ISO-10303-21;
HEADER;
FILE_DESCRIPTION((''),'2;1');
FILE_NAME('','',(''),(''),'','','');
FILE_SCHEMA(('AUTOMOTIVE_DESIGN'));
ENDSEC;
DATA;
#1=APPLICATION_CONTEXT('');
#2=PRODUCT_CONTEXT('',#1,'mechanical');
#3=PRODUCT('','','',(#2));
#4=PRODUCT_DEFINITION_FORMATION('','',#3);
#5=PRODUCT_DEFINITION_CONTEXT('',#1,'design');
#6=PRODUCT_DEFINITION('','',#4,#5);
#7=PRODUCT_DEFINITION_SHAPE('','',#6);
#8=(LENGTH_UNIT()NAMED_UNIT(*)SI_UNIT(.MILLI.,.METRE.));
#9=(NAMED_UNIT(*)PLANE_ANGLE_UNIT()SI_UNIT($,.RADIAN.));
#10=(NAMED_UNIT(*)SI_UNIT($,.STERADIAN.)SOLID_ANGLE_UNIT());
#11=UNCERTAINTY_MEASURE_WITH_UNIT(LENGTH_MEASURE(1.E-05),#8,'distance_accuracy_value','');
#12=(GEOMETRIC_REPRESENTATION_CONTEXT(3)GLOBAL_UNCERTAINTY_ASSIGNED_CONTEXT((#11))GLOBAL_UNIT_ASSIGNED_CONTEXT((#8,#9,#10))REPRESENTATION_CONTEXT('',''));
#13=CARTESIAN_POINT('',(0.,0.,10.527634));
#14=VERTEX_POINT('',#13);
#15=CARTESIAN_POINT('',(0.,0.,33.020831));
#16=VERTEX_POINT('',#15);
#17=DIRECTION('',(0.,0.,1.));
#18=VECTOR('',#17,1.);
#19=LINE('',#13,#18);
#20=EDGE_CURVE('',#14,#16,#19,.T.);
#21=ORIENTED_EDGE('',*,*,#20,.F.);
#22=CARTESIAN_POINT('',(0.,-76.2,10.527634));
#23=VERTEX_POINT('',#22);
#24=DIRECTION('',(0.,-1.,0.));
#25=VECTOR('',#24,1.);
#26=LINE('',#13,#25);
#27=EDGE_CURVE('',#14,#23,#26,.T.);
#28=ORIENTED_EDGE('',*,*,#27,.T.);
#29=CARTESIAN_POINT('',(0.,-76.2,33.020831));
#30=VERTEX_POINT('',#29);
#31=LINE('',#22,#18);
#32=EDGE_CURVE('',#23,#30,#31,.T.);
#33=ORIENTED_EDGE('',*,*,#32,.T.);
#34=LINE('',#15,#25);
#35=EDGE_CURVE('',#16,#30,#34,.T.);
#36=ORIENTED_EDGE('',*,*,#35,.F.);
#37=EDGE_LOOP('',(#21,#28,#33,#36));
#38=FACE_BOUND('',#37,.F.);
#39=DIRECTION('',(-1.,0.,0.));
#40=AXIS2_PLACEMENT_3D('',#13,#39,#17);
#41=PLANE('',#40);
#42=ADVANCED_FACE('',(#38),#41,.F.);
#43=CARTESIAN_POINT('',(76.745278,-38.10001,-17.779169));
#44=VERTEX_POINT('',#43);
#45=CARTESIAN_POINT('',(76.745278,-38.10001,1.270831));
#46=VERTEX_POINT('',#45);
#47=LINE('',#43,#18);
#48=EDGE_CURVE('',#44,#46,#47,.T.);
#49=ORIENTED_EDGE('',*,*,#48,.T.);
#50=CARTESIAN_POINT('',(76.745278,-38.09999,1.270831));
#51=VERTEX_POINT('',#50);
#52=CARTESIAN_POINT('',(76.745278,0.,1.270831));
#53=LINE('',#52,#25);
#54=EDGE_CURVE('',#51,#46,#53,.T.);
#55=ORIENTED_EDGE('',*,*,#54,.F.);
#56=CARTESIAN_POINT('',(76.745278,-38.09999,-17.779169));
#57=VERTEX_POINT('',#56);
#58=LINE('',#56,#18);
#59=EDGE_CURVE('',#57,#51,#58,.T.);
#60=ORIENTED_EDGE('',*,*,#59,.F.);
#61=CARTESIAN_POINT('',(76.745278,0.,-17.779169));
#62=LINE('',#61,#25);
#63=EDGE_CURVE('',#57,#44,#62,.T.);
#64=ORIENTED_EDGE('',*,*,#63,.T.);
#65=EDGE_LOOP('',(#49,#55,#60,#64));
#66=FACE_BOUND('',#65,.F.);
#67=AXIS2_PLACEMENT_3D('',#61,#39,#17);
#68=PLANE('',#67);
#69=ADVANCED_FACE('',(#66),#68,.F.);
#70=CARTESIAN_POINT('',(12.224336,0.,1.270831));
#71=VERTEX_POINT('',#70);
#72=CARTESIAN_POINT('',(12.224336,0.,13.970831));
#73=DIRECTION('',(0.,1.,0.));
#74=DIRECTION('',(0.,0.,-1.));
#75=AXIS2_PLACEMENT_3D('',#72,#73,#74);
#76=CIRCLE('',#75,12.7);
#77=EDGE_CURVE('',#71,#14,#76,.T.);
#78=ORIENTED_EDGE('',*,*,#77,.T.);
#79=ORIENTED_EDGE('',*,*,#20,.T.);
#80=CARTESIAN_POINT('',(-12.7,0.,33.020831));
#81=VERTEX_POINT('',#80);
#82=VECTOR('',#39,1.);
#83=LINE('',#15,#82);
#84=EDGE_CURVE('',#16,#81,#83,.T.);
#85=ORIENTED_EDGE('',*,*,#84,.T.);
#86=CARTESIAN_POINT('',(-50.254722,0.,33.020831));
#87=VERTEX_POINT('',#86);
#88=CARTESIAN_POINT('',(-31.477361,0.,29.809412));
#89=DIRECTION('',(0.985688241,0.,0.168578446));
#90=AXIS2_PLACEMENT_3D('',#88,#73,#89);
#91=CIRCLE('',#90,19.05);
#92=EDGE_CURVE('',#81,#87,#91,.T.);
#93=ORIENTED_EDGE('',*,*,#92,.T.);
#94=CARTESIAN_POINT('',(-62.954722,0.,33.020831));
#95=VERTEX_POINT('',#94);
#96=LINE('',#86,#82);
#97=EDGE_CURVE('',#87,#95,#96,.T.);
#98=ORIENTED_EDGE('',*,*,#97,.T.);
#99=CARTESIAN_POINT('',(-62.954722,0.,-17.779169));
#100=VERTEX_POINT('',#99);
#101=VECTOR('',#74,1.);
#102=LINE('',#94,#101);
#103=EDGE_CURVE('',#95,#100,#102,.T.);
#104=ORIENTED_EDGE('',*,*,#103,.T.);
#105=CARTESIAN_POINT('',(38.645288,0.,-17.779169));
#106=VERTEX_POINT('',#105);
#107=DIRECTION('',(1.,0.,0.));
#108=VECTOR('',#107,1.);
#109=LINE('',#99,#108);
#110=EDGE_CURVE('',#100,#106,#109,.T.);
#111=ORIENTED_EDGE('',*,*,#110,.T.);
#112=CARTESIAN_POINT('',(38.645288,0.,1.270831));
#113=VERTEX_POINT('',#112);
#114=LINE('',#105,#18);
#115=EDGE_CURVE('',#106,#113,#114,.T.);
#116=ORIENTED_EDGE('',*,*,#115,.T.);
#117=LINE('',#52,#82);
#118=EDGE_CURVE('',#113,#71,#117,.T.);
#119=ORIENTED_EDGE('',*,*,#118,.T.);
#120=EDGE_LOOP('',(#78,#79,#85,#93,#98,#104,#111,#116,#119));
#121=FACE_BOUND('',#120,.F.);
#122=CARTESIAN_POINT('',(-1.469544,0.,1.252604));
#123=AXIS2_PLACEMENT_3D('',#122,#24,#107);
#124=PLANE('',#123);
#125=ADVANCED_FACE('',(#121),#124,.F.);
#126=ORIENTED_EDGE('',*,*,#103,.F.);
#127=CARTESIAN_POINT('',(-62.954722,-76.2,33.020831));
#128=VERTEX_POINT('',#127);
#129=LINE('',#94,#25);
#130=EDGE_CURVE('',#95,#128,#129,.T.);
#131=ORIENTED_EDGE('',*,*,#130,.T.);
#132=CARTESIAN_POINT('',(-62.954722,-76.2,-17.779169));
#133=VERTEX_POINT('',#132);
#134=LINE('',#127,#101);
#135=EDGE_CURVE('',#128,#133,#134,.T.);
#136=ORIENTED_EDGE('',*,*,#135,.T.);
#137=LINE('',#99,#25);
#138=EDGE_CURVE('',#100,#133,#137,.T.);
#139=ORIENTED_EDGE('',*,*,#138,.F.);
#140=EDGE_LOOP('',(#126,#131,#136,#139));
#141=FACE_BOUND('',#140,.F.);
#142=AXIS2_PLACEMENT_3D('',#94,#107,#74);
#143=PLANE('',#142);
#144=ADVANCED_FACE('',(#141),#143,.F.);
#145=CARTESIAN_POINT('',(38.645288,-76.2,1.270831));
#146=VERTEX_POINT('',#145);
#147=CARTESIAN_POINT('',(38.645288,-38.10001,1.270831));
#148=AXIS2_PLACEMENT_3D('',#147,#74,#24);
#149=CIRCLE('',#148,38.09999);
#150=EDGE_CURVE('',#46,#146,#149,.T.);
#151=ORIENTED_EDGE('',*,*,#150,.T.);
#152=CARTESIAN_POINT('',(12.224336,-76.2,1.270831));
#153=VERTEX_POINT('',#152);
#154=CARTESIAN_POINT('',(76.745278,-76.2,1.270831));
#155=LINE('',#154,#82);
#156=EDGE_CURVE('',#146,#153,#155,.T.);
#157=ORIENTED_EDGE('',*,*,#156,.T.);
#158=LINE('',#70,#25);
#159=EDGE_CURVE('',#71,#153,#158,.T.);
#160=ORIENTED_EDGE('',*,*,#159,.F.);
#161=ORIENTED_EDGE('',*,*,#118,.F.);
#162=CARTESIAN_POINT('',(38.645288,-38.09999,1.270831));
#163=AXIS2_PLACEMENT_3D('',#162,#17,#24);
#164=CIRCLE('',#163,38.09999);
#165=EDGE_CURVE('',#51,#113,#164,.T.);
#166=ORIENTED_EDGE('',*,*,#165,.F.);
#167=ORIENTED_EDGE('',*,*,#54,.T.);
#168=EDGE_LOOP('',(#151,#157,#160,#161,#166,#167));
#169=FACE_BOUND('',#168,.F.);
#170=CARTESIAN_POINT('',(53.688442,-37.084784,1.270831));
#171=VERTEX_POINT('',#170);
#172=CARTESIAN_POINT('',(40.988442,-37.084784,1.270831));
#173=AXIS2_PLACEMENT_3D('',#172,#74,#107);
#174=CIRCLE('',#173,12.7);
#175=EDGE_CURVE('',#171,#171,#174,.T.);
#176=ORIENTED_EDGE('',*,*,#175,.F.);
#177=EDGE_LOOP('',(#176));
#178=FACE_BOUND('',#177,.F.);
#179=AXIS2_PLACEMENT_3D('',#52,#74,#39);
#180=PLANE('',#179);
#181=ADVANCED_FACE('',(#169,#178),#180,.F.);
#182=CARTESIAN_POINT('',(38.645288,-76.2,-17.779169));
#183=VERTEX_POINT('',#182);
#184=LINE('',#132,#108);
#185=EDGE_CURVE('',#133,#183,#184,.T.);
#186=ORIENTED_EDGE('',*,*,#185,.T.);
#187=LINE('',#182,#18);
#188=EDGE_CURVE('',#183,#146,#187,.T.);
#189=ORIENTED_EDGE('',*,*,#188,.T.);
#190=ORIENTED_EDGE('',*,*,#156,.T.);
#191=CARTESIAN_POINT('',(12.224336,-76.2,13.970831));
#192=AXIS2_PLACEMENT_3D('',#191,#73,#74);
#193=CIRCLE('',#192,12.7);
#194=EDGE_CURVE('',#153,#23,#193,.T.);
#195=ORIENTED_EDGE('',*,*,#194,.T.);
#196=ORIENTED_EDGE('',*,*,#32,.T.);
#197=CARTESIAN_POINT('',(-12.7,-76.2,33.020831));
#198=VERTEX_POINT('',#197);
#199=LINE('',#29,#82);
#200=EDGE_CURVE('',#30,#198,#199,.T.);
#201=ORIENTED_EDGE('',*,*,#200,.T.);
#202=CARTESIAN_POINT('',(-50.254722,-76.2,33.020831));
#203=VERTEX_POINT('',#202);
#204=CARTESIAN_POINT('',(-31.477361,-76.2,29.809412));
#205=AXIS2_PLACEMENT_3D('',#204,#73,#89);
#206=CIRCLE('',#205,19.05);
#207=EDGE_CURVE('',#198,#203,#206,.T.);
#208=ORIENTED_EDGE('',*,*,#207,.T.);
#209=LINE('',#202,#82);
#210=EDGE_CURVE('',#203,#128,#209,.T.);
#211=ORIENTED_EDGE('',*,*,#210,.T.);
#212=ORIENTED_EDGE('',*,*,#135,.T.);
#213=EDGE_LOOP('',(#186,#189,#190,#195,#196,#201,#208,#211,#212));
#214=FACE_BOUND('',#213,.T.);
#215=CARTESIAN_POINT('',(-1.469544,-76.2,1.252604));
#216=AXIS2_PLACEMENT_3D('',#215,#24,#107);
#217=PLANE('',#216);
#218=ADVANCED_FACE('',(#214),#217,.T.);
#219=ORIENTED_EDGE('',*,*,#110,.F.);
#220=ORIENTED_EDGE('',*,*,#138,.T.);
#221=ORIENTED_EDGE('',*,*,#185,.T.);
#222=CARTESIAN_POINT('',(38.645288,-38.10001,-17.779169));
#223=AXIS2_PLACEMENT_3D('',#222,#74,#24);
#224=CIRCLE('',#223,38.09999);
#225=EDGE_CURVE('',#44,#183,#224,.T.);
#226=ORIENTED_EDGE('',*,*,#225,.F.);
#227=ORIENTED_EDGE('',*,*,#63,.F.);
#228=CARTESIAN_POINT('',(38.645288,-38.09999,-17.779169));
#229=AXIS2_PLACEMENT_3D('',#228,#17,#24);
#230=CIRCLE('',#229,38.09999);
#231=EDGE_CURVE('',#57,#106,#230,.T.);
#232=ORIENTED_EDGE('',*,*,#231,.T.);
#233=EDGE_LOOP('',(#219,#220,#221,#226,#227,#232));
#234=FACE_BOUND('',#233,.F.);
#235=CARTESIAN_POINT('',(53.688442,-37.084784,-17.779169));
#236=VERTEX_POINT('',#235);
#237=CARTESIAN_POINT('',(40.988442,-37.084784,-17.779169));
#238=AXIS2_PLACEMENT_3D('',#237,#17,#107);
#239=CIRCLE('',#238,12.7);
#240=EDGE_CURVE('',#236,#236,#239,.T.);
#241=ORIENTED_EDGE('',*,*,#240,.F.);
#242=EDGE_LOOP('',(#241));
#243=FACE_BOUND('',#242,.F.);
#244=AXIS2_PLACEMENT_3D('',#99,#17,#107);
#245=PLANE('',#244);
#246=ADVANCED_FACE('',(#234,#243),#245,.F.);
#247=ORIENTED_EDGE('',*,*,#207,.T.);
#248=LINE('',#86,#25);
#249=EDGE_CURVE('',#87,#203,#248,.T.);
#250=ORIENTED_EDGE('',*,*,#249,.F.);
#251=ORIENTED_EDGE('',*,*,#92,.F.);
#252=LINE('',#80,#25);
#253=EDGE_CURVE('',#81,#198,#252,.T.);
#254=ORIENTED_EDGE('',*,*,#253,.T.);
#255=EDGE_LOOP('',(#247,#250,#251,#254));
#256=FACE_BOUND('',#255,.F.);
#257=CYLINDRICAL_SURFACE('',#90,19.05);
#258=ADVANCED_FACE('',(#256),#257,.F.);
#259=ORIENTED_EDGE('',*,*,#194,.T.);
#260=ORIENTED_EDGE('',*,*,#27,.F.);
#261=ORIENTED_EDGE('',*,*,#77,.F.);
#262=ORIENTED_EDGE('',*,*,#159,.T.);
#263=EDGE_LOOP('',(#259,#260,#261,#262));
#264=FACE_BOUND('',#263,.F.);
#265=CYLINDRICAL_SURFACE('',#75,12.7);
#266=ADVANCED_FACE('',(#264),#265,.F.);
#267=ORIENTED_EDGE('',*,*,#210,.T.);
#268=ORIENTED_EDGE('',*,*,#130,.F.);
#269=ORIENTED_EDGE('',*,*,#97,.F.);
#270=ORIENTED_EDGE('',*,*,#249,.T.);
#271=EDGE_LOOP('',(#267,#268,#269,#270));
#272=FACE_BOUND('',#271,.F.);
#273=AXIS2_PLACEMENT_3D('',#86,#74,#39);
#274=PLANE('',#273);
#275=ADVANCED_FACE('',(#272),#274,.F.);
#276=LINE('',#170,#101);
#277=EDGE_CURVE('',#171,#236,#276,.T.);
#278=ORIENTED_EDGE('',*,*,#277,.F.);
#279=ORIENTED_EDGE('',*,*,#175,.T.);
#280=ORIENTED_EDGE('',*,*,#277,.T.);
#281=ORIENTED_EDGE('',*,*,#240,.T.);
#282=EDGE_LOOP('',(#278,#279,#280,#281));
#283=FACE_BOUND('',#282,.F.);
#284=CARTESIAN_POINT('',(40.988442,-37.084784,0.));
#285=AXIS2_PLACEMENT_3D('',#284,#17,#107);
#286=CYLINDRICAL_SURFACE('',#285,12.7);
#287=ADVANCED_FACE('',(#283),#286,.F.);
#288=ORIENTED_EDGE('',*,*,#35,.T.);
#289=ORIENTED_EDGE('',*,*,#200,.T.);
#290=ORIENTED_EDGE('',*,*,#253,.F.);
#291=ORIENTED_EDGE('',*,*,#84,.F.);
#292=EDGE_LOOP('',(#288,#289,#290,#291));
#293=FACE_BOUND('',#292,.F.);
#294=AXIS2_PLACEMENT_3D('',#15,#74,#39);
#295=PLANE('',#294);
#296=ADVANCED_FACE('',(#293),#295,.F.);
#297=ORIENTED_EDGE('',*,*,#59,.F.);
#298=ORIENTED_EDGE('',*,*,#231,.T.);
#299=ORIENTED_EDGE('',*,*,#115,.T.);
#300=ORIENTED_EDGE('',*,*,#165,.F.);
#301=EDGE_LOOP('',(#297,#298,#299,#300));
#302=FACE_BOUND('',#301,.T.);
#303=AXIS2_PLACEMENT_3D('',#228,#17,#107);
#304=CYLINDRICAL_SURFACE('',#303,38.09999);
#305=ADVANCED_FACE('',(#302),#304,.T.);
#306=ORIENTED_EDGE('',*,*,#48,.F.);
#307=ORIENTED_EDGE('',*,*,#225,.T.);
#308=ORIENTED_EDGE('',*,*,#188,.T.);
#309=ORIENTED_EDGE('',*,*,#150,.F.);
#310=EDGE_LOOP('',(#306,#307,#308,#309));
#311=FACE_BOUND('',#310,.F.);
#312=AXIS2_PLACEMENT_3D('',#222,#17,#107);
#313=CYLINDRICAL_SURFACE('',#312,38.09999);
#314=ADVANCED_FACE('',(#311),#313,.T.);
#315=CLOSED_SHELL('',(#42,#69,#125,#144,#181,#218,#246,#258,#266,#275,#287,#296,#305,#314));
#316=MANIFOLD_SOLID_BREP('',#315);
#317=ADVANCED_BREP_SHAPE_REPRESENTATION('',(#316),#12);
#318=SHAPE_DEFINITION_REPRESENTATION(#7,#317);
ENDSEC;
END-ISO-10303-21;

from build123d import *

# Parameters (mm, degrees)
F1_DEPTH = 76.2
F2_R     = 38.09999
F3_R     = 12.7
F4_DEPTH = 50.8
F5_DEPTH = 25.4


# Not quite as in the source:
# - a fillet or chamfer is up to 0.001 mm smaller than in the source, because OpenCascade refuses the exact size


with BuildPart() as f1:
    # F0 (on Front) → F1 (new body)
    with BuildSketch(Plane.XZ):
        with BuildLine():
            Line((-50.2547219646, 33.020831282), (-62.9547219646, 33.020831282))
            Line((-62.9547219646, 33.020831282), (-62.9547219646, -17.779168718))
            Line((-62.9547219646, -17.779168718), (76.7452780354, -17.779168718))
            Line((76.7452780354, -17.779168718), (76.7452780354, 1.270831282))
            Line((76.7452780354, 1.270831282), (12.2243361415, 1.270831282))
            ThreePointArc((12.2243361415, 1.270831282), (4.5574789786, 3.8461435711), (0, 10.5276342357))
            Line((0, 10.5276342357), (0, 33.020831282))
            Line((0, 33.020831282), (-12.7, 33.020831282))
            ThreePointArc((-12.7, 33.020831282), (-31.4773609823, 10.7594118855), (-50.2547219646, 33.020831282))
        make_face()
    extrude(amount=F1_DEPTH)

    # F2 (radius 38.1 in the source; OpenCascade refuses exactly that, so slightly less here)
    f2_edges = [f1.edges().sort_by_distance(p)[0] for p in [
        (76.745278, -76.2, -8.254169),
        (76.745278, 0, -8.254169),
    ]]
    fillet(f2_edges, radius=F2_R)

    # F3 (on Top) → F4 (cut)
    with BuildSketch(Plane.XY):
        with Locations((40.9884415567, -37.0847843587)):
            Circle(F3_R)
    extrude(amount=F4_DEPTH, mode=Mode.SUBTRACT)

    # F5 (cut): a face of the model
    f5_faces = [f1.faces().sort_by_distance(p)[0] for p in [
        (40.9884415567, -37.0847843587, 0),
    ]]
    extrude(f5_faces, amount=-F5_DEPTH, mode=Mode.SUBTRACT)


solid = f1.part
